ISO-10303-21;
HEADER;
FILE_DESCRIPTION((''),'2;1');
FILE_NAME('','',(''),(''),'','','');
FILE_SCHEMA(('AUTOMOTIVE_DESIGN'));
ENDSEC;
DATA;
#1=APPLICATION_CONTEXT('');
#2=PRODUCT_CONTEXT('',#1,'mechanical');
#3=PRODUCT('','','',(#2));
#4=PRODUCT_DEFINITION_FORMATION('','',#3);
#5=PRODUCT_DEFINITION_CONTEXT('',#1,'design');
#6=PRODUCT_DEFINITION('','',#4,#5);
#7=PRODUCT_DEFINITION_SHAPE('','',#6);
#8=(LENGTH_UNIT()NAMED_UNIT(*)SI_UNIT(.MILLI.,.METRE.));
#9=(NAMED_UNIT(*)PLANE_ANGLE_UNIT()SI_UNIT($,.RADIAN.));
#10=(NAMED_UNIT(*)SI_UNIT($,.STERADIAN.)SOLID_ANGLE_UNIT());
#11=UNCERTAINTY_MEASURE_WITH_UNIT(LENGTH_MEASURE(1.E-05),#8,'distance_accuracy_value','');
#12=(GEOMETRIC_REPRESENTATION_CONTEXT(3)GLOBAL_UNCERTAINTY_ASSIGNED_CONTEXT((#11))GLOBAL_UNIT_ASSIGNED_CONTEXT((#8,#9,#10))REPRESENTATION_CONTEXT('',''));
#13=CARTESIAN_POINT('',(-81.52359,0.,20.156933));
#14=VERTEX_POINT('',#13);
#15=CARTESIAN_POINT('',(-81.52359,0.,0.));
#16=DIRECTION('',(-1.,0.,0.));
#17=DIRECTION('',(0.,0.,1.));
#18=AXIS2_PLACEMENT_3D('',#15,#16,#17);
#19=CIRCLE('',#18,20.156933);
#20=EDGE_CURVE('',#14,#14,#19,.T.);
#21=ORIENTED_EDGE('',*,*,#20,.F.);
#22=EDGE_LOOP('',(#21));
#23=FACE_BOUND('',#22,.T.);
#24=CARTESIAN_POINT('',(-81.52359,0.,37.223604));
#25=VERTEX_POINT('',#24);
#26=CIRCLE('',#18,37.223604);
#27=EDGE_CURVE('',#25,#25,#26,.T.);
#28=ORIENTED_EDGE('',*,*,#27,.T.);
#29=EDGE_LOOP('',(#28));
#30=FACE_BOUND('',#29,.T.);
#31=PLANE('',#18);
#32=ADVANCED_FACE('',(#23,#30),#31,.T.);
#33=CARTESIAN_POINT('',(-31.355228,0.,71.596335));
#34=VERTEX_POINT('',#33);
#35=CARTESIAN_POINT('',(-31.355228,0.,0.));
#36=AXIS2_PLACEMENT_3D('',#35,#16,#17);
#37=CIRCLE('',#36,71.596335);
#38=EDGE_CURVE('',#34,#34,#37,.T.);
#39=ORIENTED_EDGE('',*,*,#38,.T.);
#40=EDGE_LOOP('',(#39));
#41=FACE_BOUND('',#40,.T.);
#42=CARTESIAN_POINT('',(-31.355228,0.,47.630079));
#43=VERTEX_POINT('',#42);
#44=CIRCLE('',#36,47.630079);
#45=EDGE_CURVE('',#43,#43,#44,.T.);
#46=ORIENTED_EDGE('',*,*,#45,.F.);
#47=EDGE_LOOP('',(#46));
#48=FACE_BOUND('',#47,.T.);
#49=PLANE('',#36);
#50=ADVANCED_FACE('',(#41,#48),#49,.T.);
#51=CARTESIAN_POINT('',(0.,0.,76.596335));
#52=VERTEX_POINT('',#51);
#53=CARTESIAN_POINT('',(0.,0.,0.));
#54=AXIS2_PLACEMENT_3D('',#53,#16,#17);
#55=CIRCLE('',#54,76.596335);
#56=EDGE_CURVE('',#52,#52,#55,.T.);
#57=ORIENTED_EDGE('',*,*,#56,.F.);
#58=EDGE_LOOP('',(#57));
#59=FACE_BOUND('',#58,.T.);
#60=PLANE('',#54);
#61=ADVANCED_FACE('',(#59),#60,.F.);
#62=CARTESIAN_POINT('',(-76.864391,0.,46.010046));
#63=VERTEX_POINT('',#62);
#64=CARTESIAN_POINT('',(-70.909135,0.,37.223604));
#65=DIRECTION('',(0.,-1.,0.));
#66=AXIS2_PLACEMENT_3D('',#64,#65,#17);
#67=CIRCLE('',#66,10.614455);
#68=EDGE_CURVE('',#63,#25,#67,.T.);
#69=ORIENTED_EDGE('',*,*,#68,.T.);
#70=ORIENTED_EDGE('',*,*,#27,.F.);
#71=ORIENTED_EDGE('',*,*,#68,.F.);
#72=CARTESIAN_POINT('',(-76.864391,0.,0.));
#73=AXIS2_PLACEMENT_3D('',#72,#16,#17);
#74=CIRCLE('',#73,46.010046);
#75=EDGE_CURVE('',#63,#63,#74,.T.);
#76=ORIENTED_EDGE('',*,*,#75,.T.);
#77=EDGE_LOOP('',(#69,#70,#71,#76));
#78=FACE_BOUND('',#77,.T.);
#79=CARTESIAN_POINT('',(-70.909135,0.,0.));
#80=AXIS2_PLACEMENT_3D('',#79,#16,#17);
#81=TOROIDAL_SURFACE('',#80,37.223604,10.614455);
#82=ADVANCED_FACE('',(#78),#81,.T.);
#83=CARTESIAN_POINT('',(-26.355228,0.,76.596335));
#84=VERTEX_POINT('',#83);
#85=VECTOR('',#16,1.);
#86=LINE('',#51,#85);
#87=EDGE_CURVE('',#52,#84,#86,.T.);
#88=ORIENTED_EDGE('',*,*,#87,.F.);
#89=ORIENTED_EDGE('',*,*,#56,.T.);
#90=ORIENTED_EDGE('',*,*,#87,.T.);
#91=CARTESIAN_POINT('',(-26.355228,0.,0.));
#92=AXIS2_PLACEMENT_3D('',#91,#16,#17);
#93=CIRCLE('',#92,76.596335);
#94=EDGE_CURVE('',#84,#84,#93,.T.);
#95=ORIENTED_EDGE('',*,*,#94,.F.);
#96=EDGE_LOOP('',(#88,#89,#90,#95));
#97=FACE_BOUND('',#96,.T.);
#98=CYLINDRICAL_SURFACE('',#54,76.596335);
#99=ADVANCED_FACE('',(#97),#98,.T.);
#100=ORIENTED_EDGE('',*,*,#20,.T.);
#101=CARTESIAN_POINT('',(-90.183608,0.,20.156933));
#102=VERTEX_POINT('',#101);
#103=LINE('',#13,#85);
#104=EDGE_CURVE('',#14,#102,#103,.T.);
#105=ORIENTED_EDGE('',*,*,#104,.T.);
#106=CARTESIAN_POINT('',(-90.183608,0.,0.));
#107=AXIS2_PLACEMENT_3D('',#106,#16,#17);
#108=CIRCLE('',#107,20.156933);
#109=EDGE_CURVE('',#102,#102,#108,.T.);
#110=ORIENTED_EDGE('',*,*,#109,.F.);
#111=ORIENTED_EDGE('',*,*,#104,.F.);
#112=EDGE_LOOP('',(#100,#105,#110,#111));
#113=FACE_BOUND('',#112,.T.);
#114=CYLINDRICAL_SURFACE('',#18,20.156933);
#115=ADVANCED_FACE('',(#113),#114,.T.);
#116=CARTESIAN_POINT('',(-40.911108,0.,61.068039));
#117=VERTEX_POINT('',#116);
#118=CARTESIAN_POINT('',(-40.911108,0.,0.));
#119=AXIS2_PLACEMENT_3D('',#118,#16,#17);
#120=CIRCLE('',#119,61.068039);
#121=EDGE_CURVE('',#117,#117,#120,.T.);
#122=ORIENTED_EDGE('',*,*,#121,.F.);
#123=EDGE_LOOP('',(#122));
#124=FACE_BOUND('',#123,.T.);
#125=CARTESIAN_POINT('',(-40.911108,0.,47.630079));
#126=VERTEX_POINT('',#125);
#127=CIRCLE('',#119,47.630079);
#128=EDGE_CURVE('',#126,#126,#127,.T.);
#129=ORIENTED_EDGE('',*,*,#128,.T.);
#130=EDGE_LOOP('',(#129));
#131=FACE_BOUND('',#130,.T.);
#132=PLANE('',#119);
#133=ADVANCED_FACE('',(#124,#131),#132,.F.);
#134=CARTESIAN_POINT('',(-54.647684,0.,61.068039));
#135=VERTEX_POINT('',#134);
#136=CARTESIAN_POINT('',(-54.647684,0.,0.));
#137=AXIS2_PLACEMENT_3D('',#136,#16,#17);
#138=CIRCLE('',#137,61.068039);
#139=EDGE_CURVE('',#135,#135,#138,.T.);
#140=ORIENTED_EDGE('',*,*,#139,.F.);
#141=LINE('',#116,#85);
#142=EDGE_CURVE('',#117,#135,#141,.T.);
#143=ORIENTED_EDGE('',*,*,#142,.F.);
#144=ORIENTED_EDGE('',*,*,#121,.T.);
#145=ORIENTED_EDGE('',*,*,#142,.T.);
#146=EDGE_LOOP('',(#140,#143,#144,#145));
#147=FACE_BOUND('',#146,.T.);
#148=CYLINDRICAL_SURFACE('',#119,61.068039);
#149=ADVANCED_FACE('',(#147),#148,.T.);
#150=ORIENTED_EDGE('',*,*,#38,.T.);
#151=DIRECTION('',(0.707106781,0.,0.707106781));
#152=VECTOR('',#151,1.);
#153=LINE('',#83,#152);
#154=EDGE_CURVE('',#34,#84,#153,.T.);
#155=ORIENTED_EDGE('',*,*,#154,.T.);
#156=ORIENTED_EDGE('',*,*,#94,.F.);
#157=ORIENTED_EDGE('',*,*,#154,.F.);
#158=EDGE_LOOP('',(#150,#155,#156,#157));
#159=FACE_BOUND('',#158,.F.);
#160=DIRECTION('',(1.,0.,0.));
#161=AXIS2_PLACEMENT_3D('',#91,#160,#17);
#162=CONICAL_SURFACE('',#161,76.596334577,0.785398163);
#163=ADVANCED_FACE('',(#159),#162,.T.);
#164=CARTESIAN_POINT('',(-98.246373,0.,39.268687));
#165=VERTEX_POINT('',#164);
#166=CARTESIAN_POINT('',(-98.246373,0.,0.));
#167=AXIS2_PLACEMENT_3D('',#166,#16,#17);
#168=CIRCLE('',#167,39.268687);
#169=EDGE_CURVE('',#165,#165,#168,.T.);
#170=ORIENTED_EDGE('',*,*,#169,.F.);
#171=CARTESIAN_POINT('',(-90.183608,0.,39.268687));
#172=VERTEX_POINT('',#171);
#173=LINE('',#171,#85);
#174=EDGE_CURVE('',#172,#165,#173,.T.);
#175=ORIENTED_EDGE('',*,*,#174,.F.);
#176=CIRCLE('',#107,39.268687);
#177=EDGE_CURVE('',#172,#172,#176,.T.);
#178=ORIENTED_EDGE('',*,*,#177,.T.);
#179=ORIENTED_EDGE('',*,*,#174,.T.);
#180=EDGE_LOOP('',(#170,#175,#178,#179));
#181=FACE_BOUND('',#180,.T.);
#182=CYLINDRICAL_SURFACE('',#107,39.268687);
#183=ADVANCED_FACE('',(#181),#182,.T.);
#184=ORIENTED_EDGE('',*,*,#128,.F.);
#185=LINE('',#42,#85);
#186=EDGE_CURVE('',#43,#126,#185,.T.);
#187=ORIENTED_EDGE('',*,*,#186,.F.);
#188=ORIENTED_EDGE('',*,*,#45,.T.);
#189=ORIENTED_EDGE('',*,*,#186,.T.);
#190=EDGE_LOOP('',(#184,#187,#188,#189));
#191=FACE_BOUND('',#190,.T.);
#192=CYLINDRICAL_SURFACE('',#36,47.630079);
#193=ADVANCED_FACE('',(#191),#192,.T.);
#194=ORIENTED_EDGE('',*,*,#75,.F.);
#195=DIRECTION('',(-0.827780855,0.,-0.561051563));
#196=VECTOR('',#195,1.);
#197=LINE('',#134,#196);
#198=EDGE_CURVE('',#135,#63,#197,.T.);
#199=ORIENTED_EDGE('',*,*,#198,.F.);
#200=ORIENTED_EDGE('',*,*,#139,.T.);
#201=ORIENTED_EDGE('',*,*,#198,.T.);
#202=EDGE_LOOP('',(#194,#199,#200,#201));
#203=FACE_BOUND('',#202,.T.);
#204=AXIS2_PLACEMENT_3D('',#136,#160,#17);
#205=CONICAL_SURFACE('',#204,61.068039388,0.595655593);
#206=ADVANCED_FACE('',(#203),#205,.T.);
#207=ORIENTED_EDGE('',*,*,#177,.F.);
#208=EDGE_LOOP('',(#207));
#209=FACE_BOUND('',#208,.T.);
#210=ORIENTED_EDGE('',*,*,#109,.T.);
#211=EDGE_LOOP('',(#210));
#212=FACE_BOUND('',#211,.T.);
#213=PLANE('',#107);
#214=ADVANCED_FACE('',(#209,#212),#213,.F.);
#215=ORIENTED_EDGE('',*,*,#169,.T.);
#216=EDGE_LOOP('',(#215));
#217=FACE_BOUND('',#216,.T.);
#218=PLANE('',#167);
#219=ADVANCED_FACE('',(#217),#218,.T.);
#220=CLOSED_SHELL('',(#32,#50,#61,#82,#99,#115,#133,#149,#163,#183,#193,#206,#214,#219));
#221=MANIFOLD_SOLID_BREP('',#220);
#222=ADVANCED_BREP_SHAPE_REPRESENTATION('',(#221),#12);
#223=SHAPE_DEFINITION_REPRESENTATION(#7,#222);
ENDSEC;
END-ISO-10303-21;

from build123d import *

# Parameters (mm, degrees)
F2_R    = 10.6144552681
F3_SIZE = 5


# Not quite as in the source:
# - a feature of the source that left no trace in its solid (it failed there, or was rolled back) is left out


with BuildPart() as f1:
    # F0 (on Front) → F1 (revolve)
    with BuildSketch(Plane.XZ):
        Polygon((-98.2463732362, 0), (0, 0), (0, 76.5963345766), (-31.3552282751, 76.5963345766), (-31.3552282751, 47.6300790906), (-40.9111082554, 47.6300790906), (-40.9111082554, 61.0680393875), (-54.6476840973, 61.0680393875), (-81.5235897899, 42.8521446884), (-81.5235897899, 20.1569329947), (-90.1836082339, 20.1569329947), (-90.1836082339, 39.2686873674), (-98.2463732362, 39.2686873674), align=None)
    revolve(axis=Axis((-49.1231866181, 0, 0), (-1, 0, 0)))

    # F2
    f2_edges = [f1.edges().sort_by_distance(p)[0] for p in [
        (-81.52359, 0, -42.852145),
    ]]
    fillet(f2_edges, radius=F2_R)

    # F3
    f3_edges = [f1.edges().sort_by_distance(p)[0] for p in [
        (-31.355228, 0, -76.596335),
    ]]
    chamfer(f3_edges, length=F3_SIZE)


solid = f1.part
